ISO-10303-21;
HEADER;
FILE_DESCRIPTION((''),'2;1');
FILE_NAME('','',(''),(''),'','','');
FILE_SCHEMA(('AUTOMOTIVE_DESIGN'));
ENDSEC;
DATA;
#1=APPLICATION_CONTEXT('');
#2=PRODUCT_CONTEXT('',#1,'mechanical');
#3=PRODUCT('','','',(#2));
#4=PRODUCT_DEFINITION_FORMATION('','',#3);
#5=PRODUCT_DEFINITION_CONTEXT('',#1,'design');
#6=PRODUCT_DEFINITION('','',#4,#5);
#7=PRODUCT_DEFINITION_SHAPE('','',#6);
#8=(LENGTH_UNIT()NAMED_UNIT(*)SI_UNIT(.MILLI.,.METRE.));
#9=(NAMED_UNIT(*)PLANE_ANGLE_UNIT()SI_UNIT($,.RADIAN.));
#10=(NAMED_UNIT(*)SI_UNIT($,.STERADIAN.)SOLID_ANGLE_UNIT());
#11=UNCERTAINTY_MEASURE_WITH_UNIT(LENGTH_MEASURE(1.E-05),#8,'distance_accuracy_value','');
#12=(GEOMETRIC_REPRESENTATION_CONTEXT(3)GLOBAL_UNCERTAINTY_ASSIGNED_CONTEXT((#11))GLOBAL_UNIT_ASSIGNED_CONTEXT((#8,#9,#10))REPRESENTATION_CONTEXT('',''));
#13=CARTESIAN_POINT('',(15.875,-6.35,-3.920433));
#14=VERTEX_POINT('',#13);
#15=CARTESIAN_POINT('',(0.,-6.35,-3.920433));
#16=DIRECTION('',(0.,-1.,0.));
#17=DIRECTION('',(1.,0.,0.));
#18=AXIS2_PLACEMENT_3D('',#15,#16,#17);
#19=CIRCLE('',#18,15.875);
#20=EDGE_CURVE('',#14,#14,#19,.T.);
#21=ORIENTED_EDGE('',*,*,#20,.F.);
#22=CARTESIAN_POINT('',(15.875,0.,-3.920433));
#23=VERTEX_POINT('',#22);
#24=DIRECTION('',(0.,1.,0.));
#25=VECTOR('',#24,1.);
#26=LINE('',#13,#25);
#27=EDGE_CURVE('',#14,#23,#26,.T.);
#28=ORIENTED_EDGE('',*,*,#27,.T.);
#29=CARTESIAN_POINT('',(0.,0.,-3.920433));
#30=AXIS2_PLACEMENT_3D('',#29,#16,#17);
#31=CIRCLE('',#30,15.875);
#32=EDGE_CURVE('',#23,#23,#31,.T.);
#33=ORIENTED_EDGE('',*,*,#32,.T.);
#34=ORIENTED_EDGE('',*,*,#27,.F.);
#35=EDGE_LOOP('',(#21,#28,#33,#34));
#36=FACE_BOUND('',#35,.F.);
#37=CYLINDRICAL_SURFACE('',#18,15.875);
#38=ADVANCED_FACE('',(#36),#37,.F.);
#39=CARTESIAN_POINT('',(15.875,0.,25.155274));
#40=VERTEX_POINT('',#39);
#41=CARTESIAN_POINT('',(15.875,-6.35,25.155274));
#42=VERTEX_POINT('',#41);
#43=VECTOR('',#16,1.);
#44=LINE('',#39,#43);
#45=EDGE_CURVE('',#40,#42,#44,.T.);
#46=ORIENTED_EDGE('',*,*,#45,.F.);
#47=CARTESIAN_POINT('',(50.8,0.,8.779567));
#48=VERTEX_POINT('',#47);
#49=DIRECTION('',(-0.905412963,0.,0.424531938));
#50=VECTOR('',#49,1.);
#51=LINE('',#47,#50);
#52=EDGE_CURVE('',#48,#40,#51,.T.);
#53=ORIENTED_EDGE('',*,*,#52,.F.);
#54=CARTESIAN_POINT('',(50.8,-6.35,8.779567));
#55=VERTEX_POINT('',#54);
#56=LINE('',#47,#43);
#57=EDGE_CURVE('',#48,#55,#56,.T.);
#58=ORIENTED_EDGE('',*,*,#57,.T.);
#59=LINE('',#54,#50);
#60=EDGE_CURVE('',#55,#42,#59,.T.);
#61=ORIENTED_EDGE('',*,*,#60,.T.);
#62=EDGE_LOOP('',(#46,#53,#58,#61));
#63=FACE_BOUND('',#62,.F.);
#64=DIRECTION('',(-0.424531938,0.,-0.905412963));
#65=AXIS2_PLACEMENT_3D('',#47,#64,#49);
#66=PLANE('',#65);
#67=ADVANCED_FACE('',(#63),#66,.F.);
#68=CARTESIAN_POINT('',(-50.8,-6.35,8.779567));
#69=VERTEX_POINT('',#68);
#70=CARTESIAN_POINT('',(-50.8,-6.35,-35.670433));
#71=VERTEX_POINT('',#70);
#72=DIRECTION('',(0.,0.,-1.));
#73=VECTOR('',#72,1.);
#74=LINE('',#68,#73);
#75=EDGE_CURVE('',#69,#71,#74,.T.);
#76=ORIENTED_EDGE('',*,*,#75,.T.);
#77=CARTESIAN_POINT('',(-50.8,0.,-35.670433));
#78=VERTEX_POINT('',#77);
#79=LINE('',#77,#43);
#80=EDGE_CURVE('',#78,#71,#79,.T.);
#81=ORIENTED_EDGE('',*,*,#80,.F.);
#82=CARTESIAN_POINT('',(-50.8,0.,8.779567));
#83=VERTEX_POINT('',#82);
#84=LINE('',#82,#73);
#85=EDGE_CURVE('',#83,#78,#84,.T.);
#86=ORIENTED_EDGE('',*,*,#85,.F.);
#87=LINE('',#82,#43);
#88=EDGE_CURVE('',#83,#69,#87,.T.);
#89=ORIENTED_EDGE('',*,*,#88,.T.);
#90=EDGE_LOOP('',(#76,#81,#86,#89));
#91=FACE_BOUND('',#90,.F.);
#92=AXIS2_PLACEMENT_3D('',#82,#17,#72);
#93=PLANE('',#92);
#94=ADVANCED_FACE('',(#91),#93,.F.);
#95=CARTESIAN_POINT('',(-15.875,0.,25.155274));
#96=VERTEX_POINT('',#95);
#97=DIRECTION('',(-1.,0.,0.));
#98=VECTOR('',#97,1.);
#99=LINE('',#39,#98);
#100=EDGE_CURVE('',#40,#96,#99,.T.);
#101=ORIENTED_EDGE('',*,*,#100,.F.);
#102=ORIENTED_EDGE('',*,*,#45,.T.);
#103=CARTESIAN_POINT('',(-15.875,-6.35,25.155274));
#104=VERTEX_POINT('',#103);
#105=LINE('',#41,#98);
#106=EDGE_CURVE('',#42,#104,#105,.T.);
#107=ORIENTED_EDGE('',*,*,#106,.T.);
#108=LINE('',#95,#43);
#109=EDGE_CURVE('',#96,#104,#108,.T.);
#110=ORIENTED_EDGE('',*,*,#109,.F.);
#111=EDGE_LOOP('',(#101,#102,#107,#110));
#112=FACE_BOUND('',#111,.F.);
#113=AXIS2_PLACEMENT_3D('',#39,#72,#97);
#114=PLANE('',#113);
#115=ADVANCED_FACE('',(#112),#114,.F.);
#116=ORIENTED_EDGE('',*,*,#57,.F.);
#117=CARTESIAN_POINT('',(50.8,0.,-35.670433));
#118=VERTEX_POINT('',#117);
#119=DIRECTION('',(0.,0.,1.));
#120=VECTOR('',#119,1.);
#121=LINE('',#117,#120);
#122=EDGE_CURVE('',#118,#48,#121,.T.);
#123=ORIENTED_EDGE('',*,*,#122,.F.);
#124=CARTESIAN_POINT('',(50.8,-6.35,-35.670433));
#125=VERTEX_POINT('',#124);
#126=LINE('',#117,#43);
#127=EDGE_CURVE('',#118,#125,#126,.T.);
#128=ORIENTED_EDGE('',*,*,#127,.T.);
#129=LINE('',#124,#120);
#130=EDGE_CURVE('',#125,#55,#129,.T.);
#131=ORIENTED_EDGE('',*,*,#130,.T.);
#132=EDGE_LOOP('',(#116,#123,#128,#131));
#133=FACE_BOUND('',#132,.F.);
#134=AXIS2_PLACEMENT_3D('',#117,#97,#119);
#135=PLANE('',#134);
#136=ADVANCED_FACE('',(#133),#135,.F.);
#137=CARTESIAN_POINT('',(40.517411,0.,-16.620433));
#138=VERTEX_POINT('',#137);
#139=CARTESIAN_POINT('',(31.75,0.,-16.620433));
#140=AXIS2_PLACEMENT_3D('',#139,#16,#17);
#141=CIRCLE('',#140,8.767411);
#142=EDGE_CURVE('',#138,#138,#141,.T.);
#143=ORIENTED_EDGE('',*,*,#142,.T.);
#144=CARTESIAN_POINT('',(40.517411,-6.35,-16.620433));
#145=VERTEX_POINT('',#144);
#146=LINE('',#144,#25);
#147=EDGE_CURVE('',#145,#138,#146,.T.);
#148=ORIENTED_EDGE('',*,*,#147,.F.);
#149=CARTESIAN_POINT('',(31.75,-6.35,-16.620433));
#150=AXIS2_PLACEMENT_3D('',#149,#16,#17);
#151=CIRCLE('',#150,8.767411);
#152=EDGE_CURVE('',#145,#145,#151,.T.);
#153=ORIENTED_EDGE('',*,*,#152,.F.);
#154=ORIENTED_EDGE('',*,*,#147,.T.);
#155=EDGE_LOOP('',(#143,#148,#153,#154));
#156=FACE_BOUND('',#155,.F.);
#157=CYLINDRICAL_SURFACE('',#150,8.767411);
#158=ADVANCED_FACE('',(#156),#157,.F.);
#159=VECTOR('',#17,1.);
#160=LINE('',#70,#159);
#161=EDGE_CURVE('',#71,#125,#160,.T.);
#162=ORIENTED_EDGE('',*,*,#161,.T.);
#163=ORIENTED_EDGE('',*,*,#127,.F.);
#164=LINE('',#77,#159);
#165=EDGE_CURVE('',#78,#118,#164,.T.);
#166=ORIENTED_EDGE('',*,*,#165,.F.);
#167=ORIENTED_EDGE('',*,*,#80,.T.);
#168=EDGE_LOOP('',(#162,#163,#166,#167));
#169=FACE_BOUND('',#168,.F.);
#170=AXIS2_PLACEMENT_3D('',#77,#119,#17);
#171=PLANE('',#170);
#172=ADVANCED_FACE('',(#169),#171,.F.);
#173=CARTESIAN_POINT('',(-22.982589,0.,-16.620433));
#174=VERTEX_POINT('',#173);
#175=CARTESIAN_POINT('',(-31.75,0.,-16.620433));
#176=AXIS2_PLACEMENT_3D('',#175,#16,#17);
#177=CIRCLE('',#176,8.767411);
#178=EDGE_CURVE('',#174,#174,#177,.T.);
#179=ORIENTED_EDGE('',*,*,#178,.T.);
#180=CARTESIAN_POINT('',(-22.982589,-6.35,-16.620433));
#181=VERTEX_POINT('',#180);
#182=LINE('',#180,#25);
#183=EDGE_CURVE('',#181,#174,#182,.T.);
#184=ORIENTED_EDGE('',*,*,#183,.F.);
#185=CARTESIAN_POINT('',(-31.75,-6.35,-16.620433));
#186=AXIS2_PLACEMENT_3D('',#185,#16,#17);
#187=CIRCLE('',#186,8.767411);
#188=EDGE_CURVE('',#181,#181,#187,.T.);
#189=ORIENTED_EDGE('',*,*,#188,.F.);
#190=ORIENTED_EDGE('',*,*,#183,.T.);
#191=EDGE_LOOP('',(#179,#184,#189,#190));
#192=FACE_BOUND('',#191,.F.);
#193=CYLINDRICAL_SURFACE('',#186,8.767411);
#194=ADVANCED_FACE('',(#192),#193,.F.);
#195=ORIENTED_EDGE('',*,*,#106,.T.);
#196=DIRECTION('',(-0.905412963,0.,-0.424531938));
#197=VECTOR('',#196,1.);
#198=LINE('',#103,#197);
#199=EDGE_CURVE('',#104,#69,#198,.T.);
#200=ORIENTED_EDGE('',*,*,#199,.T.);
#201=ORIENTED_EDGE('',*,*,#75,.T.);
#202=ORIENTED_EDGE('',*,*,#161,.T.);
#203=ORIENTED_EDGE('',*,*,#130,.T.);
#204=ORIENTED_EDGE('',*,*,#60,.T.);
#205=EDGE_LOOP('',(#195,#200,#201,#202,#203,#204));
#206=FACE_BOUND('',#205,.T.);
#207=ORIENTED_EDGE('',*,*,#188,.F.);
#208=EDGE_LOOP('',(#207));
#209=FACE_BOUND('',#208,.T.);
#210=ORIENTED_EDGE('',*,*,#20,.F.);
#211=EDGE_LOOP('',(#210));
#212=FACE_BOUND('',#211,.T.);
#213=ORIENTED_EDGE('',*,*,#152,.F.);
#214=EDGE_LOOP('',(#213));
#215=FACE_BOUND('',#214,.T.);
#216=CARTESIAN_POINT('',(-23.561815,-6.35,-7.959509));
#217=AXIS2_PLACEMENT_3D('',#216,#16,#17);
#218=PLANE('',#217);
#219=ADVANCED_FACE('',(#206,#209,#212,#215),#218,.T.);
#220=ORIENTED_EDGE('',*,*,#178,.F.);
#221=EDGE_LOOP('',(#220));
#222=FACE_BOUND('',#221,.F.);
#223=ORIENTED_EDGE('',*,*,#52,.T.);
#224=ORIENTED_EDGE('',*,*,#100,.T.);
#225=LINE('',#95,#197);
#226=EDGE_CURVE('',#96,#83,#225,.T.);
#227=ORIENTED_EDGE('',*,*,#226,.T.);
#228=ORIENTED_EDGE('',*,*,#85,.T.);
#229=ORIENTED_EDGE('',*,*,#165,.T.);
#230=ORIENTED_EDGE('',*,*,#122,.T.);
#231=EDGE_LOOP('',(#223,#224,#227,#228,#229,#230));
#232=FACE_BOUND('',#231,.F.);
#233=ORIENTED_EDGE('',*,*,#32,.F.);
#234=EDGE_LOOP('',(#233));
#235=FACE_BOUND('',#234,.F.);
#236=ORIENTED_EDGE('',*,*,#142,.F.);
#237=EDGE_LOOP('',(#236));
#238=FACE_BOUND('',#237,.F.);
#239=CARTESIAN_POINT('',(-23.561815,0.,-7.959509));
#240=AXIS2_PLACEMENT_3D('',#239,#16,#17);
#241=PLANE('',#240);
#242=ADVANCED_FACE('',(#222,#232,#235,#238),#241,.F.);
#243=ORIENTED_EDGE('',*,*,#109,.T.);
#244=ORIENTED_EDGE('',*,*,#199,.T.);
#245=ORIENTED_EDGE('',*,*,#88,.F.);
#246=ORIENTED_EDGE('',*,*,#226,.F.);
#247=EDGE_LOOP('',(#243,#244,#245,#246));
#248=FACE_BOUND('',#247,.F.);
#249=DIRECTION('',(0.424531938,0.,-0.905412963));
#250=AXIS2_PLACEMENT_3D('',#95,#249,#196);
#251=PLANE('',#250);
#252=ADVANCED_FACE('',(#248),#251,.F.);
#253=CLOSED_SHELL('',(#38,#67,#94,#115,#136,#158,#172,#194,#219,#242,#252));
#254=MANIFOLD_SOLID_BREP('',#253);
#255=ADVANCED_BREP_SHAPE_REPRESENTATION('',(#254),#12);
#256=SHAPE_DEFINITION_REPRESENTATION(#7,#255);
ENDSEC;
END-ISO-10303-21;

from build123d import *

# Parameters (mm, degrees)
F1_DEPTH = 6.35
F2_R     = 15.875
F2_R_2   = 8.7674107973
F3_DEPTH = 6.35


# Not quite as in the source:
# - a feature names something its author has since deleted; it is built from what else it names


with BuildPart() as f1:
    # F0 (on Front) → F1 (new body)
    with BuildSketch(Plane.XZ):
        Polygon((-15.875, 25.1552741975), (-50.8, 8.7795666171), (-50.8, -35.6704333829), (0, -35.6704333829), (0, 25.1552741975), align=None)
        Polygon((0, 25.1552741975), (0, -35.6704333829), (50.8, -35.6704333829), (50.8, 8.7795666171), (15.875, 25.1552741975), align=None)
    extrude(amount=F1_DEPTH)

    # F2 (on face) → F3 (cut)
    with BuildSketch(Plane.XZ.offset(6.35)):
        with Locations((0, -3.9204333829)):
            Circle(F2_R)
        with Locations((31.75, -16.6204333829)):
            Circle(F2_R_2)
        with Locations((-31.75, -16.6204333829)):
            Circle(F2_R_2)
    extrude(amount=-F3_DEPTH, mode=Mode.SUBTRACT)


solid = f1.part
